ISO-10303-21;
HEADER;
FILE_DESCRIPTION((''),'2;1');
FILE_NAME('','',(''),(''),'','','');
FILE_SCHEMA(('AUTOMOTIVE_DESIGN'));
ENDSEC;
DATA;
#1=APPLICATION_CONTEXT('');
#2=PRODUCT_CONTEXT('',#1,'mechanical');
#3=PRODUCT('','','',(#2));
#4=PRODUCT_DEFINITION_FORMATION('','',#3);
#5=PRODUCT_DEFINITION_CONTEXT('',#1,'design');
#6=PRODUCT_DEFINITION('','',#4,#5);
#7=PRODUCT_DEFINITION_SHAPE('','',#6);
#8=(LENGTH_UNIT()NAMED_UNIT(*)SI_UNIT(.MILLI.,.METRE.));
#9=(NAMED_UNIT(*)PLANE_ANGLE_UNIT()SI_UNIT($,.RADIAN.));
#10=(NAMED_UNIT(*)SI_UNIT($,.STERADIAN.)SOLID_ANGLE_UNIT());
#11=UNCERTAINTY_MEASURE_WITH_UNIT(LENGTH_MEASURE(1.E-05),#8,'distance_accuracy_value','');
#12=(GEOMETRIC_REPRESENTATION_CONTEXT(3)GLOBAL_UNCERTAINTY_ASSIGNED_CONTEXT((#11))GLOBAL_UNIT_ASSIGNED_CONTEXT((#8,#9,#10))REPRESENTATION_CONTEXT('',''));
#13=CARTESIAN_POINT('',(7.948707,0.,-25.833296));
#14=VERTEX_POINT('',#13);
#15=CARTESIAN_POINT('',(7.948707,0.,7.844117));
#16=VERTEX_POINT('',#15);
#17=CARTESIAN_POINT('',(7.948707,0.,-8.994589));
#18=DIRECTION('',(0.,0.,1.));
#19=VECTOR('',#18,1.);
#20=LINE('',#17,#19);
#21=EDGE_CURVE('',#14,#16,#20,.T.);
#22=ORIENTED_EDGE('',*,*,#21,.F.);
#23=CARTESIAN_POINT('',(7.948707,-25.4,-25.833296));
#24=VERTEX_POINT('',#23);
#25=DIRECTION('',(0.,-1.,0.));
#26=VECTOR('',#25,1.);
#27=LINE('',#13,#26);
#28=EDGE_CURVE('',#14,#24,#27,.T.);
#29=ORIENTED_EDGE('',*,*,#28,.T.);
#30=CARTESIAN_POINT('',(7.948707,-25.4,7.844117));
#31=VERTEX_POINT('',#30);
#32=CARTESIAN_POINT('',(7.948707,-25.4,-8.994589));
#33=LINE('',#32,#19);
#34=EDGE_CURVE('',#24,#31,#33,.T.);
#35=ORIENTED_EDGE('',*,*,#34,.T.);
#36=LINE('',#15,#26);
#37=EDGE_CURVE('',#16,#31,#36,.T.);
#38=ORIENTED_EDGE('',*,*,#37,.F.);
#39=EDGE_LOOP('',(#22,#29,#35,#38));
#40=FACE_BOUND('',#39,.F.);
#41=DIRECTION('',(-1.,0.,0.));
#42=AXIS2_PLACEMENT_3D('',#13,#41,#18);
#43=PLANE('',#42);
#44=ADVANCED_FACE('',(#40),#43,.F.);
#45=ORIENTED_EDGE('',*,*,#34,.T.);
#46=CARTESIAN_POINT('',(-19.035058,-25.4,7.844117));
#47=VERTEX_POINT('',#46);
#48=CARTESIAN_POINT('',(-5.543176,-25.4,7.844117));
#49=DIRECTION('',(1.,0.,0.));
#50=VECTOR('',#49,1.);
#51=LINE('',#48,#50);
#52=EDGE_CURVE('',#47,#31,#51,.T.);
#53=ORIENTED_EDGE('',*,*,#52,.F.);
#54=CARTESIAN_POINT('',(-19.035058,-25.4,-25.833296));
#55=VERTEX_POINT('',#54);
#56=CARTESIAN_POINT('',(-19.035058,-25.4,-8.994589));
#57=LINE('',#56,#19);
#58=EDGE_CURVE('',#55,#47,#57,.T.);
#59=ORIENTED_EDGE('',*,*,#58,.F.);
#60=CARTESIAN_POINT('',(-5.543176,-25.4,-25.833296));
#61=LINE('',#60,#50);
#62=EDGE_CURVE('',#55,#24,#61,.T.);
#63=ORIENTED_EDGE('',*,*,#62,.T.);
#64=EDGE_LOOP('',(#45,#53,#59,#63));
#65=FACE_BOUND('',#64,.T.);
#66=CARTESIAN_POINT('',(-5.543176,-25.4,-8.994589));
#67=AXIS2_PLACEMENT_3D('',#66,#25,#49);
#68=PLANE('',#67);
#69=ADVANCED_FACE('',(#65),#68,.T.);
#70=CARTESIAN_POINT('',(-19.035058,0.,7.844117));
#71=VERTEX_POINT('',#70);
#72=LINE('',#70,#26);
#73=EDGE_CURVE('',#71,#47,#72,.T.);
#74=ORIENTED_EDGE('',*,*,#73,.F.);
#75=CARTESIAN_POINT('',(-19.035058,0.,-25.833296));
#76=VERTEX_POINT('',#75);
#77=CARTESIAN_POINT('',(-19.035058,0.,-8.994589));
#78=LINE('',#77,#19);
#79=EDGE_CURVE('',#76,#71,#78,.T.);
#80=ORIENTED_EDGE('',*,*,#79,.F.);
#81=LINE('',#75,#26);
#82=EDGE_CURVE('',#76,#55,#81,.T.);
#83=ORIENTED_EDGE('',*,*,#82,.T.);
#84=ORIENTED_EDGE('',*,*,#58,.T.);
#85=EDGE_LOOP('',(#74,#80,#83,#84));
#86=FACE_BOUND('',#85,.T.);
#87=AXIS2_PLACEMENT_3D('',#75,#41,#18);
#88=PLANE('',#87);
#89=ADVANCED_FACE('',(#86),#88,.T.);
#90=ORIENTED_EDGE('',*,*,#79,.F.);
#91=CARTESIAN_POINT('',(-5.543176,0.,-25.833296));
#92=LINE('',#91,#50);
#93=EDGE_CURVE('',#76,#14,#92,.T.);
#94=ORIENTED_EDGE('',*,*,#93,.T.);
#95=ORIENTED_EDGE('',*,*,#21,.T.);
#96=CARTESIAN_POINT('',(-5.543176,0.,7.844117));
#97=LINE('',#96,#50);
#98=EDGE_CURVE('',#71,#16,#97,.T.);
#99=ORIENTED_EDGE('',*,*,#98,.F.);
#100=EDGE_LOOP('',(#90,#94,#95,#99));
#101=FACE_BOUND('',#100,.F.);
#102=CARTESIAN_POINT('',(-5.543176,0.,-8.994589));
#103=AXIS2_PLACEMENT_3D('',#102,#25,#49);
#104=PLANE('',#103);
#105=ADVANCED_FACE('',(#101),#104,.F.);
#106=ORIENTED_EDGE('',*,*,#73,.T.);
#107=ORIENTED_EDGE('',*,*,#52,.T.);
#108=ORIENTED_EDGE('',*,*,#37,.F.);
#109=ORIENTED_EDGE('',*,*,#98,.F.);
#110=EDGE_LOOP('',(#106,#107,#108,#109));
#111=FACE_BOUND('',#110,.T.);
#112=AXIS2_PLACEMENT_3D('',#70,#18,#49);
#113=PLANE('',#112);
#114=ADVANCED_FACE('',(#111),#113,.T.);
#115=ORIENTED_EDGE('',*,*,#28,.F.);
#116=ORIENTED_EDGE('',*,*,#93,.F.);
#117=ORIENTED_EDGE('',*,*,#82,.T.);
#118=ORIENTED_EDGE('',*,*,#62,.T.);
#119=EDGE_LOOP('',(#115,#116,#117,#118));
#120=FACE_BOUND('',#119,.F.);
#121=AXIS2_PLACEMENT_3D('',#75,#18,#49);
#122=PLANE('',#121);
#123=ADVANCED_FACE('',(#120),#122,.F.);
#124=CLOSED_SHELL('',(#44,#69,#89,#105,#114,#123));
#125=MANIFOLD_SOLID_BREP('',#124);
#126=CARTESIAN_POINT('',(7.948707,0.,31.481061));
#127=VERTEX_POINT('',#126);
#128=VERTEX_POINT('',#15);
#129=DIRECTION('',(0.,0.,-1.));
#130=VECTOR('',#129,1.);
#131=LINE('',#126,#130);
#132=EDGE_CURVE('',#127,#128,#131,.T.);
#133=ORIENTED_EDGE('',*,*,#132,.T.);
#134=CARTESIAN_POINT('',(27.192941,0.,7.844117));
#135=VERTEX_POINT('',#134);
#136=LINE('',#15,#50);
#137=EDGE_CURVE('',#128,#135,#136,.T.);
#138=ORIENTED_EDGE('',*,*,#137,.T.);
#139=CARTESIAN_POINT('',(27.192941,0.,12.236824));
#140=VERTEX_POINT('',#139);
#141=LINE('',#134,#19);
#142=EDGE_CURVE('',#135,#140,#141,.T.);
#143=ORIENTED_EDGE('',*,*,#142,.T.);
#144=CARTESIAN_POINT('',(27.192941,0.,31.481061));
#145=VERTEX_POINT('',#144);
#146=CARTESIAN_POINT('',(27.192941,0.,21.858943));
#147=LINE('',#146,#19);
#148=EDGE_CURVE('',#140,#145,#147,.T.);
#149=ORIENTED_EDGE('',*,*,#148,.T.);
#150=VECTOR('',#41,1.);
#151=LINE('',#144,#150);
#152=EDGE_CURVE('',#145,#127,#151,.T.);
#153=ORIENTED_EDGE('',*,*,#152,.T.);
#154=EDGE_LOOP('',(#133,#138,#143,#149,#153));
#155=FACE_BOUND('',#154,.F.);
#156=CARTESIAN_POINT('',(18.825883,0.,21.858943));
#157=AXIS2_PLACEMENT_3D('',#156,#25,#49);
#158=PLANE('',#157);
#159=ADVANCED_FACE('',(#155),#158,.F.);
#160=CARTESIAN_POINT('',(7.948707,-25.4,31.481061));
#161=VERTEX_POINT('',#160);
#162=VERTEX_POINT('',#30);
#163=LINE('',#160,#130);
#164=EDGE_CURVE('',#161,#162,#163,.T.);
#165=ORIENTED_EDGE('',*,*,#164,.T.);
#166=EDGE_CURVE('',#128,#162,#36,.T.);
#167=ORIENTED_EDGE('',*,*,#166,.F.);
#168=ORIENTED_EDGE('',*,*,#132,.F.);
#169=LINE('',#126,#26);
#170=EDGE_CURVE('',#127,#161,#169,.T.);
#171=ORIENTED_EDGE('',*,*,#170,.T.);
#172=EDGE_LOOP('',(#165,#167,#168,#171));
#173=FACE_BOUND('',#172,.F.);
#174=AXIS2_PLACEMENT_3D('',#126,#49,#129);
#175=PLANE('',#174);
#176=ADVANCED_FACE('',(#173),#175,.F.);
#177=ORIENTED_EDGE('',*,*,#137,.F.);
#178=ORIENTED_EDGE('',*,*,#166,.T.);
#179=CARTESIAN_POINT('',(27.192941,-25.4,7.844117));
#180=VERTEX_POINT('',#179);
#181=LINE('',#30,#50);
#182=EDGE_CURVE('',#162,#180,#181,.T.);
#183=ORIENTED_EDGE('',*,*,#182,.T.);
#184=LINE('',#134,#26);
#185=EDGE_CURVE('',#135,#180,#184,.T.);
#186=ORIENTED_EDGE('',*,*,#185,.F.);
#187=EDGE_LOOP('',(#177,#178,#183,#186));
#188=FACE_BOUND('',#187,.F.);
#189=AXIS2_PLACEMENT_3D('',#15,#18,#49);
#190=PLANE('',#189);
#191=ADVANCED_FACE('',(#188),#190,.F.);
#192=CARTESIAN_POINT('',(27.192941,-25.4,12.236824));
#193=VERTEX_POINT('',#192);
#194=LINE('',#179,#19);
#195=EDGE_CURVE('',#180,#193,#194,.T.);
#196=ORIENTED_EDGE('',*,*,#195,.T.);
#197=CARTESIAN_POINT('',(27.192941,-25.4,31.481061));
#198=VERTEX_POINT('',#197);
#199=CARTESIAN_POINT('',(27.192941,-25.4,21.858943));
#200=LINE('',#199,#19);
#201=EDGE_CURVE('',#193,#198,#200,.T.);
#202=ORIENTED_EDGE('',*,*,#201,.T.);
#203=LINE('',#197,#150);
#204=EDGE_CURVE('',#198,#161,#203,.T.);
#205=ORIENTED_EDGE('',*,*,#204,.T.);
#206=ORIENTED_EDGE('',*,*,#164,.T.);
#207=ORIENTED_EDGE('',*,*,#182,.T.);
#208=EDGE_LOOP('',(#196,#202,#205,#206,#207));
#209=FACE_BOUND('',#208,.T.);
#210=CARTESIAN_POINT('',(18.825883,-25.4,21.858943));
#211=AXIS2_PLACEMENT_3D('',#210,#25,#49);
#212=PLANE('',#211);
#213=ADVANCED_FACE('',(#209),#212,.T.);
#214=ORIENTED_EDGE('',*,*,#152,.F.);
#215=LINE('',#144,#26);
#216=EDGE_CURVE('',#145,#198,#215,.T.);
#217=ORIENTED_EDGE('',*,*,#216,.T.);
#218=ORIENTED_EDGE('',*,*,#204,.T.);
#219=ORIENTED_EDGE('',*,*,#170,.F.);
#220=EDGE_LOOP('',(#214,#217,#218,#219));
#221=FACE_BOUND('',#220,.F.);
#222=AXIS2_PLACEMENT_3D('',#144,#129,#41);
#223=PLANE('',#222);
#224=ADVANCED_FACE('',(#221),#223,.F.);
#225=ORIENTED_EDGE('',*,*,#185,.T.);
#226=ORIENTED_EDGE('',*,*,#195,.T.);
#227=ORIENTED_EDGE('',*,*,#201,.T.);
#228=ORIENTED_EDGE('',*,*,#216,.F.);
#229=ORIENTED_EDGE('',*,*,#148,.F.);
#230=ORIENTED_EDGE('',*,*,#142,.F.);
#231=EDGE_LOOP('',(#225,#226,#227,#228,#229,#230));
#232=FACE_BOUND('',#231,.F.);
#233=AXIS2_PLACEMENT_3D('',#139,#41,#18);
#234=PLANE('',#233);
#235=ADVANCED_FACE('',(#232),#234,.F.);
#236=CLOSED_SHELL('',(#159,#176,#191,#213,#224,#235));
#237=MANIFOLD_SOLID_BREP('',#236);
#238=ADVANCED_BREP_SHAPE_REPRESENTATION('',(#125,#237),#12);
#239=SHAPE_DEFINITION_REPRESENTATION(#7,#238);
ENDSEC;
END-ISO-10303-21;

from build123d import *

# Parameters (mm, degrees)
F0_W     = 16.7341167107
F0_H     = 19.2442368716
F1_DEPTH = 25.4
F0_W_2   = 26.9837649539
F0_H_2   = 33.6774131283


# Not quite as in the source:
# - a feature of the source that left no trace in its solid (it failed there, or was rolled back) is left out


with BuildPart() as f1:
    # F0 (on Front) → F1 (new body)
    with BuildSketch(Plane.XZ):
        with Locations((18.8258825801, 21.858942695)):
            Rectangle(F0_W, F0_H)
        Polygon((10.4588242248, 12.2368242592), (10.4588242248, 31.4810611308), (7.9487068579, 31.4810611308), (7.9487068579, 7.8441174701), (27.1929409355, 7.8441174701), (27.1929409355, 12.2368242592), align=None)
    extrude(amount=F1_DEPTH)


with BuildPart() as f1b:
    # F0 (on Front) → F1, piece 2 (new body)
    with BuildSketch(Plane.XZ):
        with Locations((-5.5431756191, -8.9945890941)):
            Rectangle(F0_W_2, F0_H_2)
    extrude(amount=F1_DEPTH)


solid = Compound([f1.part, f1b.part])
